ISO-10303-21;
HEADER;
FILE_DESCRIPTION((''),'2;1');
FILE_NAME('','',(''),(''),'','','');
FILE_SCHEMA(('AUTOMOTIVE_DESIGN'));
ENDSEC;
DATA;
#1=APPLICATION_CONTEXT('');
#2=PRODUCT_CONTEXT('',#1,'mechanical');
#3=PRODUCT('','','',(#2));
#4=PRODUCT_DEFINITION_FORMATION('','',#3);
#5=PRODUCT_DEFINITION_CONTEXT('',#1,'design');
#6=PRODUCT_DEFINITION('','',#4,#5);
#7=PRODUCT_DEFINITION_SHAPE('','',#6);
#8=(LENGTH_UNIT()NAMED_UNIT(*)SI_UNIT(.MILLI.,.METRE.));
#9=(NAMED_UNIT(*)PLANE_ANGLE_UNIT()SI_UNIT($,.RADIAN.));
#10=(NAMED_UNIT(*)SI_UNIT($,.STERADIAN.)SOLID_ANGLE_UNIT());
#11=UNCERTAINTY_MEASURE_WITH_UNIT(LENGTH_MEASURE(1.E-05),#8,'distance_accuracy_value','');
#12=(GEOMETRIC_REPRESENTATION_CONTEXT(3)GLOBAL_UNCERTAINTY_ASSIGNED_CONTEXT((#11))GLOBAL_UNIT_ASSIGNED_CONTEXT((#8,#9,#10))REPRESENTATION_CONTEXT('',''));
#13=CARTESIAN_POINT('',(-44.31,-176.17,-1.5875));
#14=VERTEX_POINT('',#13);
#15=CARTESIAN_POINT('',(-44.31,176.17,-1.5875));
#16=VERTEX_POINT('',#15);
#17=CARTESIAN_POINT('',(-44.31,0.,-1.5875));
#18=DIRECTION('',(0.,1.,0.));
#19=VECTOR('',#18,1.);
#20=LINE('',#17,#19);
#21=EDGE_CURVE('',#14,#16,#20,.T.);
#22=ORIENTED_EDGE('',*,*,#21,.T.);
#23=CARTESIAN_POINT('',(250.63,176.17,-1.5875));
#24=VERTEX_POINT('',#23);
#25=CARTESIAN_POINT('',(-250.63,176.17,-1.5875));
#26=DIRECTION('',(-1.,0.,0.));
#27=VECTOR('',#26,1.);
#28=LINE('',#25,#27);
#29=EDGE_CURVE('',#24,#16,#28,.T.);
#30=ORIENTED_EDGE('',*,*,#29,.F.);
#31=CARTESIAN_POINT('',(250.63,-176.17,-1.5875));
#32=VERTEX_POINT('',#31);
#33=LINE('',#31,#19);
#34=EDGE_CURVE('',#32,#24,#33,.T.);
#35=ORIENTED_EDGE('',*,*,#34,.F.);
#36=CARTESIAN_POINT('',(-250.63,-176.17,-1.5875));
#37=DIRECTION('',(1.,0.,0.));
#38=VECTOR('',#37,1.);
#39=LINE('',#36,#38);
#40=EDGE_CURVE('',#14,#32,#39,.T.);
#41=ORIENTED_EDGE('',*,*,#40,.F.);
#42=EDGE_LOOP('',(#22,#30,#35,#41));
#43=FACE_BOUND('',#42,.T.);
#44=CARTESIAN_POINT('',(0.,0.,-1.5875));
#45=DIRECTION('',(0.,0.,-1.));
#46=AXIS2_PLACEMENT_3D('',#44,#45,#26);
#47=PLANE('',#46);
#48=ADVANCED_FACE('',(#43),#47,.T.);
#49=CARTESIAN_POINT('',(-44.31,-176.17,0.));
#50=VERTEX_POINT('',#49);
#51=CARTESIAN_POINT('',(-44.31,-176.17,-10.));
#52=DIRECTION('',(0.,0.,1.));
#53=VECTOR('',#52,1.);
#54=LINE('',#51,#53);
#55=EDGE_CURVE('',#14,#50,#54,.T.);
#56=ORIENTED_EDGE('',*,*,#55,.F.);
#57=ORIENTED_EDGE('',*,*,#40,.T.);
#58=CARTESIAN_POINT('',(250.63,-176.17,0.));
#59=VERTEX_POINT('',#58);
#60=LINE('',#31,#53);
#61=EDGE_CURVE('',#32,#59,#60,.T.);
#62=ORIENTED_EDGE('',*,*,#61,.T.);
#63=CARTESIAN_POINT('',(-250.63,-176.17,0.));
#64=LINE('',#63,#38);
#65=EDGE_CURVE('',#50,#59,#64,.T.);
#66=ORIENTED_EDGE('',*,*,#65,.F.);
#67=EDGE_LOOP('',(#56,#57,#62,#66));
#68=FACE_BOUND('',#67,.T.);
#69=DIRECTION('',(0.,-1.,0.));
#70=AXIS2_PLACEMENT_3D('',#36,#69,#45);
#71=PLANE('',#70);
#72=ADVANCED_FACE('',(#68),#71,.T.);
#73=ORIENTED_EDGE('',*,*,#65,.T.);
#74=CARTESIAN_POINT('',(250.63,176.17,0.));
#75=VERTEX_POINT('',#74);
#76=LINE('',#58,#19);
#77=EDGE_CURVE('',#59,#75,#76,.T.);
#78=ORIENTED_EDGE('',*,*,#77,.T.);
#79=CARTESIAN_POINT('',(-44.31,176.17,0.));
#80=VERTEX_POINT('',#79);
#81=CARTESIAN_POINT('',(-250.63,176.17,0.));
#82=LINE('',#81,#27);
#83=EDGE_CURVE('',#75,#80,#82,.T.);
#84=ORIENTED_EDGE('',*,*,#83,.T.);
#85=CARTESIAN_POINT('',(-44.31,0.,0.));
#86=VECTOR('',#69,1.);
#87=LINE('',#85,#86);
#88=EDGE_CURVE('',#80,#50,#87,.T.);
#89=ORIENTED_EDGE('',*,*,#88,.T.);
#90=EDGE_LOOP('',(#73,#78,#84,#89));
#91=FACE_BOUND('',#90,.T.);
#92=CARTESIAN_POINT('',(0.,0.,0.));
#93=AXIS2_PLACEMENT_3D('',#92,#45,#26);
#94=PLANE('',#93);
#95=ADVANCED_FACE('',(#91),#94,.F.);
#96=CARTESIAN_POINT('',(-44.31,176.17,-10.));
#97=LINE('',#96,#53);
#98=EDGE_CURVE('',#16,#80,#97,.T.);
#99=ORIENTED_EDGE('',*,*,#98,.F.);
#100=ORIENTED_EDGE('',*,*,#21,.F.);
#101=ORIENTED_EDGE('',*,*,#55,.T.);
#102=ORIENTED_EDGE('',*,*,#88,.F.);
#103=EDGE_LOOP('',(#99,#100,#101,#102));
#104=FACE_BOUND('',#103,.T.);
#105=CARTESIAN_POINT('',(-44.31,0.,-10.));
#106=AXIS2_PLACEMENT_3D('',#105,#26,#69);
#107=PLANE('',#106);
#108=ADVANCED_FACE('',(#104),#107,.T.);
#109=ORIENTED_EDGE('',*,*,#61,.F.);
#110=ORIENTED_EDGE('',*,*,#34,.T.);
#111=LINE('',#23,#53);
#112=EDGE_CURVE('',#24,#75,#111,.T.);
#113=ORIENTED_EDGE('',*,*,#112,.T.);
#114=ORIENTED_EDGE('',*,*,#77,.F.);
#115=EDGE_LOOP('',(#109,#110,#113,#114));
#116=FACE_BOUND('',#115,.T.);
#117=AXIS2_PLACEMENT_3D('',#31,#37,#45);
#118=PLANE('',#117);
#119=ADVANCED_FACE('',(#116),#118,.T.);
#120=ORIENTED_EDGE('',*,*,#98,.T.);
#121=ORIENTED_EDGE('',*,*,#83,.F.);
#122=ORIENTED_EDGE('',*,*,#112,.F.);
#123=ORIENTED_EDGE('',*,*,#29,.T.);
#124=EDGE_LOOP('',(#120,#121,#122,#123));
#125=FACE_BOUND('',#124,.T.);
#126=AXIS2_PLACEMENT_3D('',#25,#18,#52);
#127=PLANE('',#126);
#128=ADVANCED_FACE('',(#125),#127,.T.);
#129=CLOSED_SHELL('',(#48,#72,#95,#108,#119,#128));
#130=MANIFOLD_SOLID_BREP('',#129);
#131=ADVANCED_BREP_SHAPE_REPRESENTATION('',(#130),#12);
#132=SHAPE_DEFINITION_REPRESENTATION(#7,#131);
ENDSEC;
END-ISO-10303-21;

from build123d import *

# Parameters (mm, degrees)
CROQUIS1_W            = 501.26
CROQUIS1_H            = 352.34
BRIDA_BASE1_DEPTH     = 1.5875
CROQUIS2_W            = 206.32
CROQUIS2_H            = 110
CROQUIS2_H_2          = 918.56963319
CORTAR_EXTRUIR1_DEPTH = 10


# Sheet-metal steps are written as plain solids
with BuildPart() as part:
    # Croquis1 → Brida base1 (new body)
    with BuildSketch(Plane.XY):
        Rectangle(CROQUIS1_W, CROQUIS1_H)
    extrude(amount=-BRIDA_BASE1_DEPTH)

    # Croquis2 → Cortar-Extruir1 (cut)
    with BuildSketch(Plane.XY):
        Polygon((-250.63, 68.83), (-250.63, -68.83), (-250.63, -178.83), (-250.63, -1129.362643751), (-44.31, -1129.362643751), (-44.31, -178.83), (-44.31, -68.83), (-44.31, 68.83), align=None)
        with Locations((-147.47, 123.83)):
            Rectangle(CROQUIS2_W, CROQUIS2_H)
        with Locations((-147.47, 638.114816595)):
            Rectangle(CROQUIS2_W, CROQUIS2_H_2)
    extrude(amount=-CORTAR_EXTRUIR1_DEPTH, mode=Mode.SUBTRACT)


solid = part.part
